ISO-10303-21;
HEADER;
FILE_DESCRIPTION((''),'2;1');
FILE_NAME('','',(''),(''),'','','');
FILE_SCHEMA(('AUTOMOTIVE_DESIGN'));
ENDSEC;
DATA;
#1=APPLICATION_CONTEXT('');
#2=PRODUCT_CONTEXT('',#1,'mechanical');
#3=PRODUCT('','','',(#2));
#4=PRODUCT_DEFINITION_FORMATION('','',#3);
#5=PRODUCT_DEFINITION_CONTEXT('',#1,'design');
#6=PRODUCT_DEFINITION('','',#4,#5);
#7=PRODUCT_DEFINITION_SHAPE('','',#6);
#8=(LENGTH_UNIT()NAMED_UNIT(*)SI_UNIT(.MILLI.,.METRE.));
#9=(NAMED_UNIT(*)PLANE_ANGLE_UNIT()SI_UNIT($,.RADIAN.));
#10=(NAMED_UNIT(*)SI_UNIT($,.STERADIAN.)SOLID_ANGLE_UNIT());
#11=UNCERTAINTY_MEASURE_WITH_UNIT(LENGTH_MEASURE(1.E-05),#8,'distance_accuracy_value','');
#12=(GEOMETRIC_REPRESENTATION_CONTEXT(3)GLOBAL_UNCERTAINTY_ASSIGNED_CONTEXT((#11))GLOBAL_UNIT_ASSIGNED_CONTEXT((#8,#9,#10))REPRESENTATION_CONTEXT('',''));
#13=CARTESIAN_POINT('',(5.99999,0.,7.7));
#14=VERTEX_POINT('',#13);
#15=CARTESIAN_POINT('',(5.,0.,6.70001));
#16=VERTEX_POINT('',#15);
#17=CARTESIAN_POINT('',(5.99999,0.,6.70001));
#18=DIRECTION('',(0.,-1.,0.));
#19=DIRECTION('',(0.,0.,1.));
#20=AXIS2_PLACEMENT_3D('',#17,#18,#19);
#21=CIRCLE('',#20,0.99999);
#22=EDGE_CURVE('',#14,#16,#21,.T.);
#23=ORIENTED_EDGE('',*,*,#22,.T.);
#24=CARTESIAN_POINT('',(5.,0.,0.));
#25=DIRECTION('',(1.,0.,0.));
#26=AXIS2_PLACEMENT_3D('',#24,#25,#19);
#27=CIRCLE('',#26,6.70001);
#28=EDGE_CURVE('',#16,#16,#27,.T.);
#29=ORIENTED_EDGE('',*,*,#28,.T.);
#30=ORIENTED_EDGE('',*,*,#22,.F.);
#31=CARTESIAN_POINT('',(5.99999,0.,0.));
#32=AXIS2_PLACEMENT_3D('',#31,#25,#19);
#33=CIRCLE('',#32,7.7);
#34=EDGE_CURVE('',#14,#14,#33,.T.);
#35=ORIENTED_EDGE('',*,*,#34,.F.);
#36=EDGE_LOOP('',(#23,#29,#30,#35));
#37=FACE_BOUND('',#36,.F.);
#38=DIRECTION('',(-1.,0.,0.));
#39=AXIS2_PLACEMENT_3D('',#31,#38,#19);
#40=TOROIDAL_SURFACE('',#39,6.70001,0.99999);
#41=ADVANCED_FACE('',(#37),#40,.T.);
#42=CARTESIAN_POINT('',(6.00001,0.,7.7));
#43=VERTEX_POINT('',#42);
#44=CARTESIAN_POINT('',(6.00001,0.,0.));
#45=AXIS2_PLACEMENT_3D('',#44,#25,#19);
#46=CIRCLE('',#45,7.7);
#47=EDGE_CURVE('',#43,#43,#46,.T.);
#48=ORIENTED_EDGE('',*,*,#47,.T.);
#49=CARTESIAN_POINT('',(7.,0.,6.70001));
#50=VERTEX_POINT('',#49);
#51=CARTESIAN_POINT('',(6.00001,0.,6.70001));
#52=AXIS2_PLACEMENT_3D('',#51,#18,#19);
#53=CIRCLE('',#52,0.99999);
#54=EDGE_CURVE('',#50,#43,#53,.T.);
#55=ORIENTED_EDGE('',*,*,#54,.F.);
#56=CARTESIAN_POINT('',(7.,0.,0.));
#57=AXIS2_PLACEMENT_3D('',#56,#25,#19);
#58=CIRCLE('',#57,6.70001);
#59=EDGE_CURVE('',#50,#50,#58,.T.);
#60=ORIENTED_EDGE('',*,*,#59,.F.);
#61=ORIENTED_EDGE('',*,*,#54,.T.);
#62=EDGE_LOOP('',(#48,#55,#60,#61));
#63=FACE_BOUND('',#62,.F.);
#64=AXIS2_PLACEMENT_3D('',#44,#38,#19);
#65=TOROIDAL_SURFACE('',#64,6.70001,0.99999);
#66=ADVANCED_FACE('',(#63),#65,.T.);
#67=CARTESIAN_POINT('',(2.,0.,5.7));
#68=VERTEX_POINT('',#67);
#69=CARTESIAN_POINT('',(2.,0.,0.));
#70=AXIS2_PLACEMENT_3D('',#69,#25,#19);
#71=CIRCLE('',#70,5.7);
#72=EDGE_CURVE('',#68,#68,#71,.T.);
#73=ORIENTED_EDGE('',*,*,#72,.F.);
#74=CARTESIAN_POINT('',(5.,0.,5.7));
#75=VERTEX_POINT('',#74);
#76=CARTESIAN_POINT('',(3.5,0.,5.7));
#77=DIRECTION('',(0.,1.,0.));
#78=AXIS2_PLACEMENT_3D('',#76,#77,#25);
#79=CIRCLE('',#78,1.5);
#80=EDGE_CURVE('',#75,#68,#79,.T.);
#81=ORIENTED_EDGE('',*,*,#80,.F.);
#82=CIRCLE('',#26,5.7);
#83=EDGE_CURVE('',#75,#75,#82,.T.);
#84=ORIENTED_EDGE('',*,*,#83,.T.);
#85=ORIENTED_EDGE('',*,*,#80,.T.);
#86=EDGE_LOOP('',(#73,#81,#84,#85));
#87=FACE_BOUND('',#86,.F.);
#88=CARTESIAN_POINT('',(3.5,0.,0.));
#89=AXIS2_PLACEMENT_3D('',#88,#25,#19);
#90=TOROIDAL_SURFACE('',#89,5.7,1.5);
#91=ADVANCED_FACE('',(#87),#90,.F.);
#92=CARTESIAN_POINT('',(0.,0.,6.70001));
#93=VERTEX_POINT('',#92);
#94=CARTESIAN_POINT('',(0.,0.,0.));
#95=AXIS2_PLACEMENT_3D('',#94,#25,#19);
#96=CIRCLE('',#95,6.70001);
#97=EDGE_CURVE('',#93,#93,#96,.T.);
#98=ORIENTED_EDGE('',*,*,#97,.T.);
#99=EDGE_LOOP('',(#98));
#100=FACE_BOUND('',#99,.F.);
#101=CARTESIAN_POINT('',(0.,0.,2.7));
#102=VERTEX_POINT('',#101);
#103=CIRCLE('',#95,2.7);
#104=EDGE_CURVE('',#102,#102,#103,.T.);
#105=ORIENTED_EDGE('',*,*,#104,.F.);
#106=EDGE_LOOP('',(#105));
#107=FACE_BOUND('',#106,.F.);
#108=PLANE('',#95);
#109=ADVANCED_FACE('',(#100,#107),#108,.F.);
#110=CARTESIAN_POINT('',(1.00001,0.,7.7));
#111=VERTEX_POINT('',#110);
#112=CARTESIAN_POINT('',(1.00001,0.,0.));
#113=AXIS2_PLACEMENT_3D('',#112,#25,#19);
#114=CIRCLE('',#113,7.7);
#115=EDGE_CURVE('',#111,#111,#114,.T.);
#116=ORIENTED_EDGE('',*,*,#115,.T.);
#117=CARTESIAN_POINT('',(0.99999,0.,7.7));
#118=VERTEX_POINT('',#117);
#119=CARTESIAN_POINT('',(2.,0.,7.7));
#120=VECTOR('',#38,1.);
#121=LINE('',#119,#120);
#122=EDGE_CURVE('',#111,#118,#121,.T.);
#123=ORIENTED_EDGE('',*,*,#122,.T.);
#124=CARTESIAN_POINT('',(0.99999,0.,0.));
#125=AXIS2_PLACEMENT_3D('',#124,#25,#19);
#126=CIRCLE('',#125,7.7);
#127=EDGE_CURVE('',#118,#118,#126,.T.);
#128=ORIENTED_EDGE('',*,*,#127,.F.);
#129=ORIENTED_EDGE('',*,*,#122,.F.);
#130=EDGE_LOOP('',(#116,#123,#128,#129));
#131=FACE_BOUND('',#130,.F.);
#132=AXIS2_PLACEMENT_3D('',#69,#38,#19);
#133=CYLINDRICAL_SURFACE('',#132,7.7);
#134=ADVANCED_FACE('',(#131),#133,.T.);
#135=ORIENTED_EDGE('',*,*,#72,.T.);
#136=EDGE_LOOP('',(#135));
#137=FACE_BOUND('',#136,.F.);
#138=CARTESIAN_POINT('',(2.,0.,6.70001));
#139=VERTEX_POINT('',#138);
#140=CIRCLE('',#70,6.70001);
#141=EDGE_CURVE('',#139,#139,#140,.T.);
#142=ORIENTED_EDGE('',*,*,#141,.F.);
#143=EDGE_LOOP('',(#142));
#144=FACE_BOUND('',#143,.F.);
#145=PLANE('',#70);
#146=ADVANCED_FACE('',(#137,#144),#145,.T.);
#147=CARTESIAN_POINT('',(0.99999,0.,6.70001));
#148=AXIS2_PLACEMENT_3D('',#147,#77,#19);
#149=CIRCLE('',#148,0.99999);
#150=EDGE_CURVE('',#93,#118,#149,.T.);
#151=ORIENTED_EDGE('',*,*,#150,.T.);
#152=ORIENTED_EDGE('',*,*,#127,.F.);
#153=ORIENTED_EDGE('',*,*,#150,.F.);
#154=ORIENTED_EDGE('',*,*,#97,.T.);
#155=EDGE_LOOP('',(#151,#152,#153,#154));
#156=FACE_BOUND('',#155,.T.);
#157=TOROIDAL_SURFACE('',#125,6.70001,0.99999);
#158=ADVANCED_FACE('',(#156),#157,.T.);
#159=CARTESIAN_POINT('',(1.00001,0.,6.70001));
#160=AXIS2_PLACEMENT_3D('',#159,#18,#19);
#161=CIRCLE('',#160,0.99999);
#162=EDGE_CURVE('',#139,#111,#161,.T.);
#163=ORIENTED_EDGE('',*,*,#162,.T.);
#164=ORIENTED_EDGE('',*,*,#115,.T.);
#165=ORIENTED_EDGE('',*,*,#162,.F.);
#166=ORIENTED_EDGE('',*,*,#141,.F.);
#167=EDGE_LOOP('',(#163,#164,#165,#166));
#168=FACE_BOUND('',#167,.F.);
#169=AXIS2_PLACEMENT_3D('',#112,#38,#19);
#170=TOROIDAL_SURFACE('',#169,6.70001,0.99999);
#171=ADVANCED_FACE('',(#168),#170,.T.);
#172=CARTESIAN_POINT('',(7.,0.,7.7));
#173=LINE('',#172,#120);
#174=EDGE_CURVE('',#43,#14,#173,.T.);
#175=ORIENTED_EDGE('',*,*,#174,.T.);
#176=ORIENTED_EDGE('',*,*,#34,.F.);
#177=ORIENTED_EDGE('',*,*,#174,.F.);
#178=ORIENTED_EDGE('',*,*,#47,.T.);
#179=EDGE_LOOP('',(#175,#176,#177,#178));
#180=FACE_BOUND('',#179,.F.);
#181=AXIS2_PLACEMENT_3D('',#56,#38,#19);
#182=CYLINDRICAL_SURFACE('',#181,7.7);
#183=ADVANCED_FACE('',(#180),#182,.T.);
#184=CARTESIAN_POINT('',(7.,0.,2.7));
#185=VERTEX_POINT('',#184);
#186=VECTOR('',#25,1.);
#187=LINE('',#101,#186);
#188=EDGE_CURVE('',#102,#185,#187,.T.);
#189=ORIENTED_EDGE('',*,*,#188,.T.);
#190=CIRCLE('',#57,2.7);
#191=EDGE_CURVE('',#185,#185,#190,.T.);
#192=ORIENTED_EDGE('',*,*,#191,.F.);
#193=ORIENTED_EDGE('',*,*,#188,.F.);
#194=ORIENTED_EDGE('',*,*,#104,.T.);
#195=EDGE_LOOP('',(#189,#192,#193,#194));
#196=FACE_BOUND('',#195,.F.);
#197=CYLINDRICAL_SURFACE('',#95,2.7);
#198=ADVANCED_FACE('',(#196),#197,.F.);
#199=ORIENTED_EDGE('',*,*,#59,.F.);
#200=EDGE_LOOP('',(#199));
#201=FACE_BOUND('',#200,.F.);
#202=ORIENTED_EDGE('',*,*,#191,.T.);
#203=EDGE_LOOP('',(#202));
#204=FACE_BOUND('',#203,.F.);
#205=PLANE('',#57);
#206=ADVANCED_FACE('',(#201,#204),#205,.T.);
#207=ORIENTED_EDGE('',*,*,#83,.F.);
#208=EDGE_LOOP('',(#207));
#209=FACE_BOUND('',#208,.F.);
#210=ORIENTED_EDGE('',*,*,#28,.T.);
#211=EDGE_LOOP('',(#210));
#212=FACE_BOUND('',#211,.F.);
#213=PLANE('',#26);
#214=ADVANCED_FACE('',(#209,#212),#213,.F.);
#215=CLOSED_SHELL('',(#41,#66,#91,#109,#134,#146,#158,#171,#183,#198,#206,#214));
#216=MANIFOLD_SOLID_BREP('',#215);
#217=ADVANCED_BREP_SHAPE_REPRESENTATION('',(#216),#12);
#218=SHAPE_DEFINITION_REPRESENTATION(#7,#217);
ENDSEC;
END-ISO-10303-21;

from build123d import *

# Parameters (mm, degrees)
F2_R = 0.99999


# Not quite as in the source:
# - a fillet or chamfer is up to 0.001 mm smaller than in the source, because OpenCascade refuses the exact size


with BuildPart() as f1:
    # F0 (on Front) → F1 (revolve)
    with BuildSketch(Plane.XZ):
        with BuildLine():
            Line((0, 7.7), (0, 2.7))
            Line((0, 2.7), (7, 2.7))
            Line((7, 2.7), (7, 7.7))
            Line((7, 7.7), (5, 7.7))
            Line((5, 7.7), (5, 5.7))
            ThreePointArc((5, 5.7), (3.5, 4.2), (2, 5.7))
            Line((2, 5.7), (2, 7.7))
            Line((2, 7.7), (0, 7.7))
        make_face()
    revolve(axis=Axis((3.5, 0, 0), (1, 0, 0)))

    # F2 (radius 1 in the source; OpenCascade refuses exactly that, so slightly less here)
    f2_edges = [f1.edges().sort_by_distance(p)[0] for p in [
        (7, 0, -7.7),
        (5, 0, -7.7),
        (2, 0, -7.7),
        (0, 0, -7.7),
    ]]
    fillet(f2_edges, radius=F2_R)


solid = f1.part
